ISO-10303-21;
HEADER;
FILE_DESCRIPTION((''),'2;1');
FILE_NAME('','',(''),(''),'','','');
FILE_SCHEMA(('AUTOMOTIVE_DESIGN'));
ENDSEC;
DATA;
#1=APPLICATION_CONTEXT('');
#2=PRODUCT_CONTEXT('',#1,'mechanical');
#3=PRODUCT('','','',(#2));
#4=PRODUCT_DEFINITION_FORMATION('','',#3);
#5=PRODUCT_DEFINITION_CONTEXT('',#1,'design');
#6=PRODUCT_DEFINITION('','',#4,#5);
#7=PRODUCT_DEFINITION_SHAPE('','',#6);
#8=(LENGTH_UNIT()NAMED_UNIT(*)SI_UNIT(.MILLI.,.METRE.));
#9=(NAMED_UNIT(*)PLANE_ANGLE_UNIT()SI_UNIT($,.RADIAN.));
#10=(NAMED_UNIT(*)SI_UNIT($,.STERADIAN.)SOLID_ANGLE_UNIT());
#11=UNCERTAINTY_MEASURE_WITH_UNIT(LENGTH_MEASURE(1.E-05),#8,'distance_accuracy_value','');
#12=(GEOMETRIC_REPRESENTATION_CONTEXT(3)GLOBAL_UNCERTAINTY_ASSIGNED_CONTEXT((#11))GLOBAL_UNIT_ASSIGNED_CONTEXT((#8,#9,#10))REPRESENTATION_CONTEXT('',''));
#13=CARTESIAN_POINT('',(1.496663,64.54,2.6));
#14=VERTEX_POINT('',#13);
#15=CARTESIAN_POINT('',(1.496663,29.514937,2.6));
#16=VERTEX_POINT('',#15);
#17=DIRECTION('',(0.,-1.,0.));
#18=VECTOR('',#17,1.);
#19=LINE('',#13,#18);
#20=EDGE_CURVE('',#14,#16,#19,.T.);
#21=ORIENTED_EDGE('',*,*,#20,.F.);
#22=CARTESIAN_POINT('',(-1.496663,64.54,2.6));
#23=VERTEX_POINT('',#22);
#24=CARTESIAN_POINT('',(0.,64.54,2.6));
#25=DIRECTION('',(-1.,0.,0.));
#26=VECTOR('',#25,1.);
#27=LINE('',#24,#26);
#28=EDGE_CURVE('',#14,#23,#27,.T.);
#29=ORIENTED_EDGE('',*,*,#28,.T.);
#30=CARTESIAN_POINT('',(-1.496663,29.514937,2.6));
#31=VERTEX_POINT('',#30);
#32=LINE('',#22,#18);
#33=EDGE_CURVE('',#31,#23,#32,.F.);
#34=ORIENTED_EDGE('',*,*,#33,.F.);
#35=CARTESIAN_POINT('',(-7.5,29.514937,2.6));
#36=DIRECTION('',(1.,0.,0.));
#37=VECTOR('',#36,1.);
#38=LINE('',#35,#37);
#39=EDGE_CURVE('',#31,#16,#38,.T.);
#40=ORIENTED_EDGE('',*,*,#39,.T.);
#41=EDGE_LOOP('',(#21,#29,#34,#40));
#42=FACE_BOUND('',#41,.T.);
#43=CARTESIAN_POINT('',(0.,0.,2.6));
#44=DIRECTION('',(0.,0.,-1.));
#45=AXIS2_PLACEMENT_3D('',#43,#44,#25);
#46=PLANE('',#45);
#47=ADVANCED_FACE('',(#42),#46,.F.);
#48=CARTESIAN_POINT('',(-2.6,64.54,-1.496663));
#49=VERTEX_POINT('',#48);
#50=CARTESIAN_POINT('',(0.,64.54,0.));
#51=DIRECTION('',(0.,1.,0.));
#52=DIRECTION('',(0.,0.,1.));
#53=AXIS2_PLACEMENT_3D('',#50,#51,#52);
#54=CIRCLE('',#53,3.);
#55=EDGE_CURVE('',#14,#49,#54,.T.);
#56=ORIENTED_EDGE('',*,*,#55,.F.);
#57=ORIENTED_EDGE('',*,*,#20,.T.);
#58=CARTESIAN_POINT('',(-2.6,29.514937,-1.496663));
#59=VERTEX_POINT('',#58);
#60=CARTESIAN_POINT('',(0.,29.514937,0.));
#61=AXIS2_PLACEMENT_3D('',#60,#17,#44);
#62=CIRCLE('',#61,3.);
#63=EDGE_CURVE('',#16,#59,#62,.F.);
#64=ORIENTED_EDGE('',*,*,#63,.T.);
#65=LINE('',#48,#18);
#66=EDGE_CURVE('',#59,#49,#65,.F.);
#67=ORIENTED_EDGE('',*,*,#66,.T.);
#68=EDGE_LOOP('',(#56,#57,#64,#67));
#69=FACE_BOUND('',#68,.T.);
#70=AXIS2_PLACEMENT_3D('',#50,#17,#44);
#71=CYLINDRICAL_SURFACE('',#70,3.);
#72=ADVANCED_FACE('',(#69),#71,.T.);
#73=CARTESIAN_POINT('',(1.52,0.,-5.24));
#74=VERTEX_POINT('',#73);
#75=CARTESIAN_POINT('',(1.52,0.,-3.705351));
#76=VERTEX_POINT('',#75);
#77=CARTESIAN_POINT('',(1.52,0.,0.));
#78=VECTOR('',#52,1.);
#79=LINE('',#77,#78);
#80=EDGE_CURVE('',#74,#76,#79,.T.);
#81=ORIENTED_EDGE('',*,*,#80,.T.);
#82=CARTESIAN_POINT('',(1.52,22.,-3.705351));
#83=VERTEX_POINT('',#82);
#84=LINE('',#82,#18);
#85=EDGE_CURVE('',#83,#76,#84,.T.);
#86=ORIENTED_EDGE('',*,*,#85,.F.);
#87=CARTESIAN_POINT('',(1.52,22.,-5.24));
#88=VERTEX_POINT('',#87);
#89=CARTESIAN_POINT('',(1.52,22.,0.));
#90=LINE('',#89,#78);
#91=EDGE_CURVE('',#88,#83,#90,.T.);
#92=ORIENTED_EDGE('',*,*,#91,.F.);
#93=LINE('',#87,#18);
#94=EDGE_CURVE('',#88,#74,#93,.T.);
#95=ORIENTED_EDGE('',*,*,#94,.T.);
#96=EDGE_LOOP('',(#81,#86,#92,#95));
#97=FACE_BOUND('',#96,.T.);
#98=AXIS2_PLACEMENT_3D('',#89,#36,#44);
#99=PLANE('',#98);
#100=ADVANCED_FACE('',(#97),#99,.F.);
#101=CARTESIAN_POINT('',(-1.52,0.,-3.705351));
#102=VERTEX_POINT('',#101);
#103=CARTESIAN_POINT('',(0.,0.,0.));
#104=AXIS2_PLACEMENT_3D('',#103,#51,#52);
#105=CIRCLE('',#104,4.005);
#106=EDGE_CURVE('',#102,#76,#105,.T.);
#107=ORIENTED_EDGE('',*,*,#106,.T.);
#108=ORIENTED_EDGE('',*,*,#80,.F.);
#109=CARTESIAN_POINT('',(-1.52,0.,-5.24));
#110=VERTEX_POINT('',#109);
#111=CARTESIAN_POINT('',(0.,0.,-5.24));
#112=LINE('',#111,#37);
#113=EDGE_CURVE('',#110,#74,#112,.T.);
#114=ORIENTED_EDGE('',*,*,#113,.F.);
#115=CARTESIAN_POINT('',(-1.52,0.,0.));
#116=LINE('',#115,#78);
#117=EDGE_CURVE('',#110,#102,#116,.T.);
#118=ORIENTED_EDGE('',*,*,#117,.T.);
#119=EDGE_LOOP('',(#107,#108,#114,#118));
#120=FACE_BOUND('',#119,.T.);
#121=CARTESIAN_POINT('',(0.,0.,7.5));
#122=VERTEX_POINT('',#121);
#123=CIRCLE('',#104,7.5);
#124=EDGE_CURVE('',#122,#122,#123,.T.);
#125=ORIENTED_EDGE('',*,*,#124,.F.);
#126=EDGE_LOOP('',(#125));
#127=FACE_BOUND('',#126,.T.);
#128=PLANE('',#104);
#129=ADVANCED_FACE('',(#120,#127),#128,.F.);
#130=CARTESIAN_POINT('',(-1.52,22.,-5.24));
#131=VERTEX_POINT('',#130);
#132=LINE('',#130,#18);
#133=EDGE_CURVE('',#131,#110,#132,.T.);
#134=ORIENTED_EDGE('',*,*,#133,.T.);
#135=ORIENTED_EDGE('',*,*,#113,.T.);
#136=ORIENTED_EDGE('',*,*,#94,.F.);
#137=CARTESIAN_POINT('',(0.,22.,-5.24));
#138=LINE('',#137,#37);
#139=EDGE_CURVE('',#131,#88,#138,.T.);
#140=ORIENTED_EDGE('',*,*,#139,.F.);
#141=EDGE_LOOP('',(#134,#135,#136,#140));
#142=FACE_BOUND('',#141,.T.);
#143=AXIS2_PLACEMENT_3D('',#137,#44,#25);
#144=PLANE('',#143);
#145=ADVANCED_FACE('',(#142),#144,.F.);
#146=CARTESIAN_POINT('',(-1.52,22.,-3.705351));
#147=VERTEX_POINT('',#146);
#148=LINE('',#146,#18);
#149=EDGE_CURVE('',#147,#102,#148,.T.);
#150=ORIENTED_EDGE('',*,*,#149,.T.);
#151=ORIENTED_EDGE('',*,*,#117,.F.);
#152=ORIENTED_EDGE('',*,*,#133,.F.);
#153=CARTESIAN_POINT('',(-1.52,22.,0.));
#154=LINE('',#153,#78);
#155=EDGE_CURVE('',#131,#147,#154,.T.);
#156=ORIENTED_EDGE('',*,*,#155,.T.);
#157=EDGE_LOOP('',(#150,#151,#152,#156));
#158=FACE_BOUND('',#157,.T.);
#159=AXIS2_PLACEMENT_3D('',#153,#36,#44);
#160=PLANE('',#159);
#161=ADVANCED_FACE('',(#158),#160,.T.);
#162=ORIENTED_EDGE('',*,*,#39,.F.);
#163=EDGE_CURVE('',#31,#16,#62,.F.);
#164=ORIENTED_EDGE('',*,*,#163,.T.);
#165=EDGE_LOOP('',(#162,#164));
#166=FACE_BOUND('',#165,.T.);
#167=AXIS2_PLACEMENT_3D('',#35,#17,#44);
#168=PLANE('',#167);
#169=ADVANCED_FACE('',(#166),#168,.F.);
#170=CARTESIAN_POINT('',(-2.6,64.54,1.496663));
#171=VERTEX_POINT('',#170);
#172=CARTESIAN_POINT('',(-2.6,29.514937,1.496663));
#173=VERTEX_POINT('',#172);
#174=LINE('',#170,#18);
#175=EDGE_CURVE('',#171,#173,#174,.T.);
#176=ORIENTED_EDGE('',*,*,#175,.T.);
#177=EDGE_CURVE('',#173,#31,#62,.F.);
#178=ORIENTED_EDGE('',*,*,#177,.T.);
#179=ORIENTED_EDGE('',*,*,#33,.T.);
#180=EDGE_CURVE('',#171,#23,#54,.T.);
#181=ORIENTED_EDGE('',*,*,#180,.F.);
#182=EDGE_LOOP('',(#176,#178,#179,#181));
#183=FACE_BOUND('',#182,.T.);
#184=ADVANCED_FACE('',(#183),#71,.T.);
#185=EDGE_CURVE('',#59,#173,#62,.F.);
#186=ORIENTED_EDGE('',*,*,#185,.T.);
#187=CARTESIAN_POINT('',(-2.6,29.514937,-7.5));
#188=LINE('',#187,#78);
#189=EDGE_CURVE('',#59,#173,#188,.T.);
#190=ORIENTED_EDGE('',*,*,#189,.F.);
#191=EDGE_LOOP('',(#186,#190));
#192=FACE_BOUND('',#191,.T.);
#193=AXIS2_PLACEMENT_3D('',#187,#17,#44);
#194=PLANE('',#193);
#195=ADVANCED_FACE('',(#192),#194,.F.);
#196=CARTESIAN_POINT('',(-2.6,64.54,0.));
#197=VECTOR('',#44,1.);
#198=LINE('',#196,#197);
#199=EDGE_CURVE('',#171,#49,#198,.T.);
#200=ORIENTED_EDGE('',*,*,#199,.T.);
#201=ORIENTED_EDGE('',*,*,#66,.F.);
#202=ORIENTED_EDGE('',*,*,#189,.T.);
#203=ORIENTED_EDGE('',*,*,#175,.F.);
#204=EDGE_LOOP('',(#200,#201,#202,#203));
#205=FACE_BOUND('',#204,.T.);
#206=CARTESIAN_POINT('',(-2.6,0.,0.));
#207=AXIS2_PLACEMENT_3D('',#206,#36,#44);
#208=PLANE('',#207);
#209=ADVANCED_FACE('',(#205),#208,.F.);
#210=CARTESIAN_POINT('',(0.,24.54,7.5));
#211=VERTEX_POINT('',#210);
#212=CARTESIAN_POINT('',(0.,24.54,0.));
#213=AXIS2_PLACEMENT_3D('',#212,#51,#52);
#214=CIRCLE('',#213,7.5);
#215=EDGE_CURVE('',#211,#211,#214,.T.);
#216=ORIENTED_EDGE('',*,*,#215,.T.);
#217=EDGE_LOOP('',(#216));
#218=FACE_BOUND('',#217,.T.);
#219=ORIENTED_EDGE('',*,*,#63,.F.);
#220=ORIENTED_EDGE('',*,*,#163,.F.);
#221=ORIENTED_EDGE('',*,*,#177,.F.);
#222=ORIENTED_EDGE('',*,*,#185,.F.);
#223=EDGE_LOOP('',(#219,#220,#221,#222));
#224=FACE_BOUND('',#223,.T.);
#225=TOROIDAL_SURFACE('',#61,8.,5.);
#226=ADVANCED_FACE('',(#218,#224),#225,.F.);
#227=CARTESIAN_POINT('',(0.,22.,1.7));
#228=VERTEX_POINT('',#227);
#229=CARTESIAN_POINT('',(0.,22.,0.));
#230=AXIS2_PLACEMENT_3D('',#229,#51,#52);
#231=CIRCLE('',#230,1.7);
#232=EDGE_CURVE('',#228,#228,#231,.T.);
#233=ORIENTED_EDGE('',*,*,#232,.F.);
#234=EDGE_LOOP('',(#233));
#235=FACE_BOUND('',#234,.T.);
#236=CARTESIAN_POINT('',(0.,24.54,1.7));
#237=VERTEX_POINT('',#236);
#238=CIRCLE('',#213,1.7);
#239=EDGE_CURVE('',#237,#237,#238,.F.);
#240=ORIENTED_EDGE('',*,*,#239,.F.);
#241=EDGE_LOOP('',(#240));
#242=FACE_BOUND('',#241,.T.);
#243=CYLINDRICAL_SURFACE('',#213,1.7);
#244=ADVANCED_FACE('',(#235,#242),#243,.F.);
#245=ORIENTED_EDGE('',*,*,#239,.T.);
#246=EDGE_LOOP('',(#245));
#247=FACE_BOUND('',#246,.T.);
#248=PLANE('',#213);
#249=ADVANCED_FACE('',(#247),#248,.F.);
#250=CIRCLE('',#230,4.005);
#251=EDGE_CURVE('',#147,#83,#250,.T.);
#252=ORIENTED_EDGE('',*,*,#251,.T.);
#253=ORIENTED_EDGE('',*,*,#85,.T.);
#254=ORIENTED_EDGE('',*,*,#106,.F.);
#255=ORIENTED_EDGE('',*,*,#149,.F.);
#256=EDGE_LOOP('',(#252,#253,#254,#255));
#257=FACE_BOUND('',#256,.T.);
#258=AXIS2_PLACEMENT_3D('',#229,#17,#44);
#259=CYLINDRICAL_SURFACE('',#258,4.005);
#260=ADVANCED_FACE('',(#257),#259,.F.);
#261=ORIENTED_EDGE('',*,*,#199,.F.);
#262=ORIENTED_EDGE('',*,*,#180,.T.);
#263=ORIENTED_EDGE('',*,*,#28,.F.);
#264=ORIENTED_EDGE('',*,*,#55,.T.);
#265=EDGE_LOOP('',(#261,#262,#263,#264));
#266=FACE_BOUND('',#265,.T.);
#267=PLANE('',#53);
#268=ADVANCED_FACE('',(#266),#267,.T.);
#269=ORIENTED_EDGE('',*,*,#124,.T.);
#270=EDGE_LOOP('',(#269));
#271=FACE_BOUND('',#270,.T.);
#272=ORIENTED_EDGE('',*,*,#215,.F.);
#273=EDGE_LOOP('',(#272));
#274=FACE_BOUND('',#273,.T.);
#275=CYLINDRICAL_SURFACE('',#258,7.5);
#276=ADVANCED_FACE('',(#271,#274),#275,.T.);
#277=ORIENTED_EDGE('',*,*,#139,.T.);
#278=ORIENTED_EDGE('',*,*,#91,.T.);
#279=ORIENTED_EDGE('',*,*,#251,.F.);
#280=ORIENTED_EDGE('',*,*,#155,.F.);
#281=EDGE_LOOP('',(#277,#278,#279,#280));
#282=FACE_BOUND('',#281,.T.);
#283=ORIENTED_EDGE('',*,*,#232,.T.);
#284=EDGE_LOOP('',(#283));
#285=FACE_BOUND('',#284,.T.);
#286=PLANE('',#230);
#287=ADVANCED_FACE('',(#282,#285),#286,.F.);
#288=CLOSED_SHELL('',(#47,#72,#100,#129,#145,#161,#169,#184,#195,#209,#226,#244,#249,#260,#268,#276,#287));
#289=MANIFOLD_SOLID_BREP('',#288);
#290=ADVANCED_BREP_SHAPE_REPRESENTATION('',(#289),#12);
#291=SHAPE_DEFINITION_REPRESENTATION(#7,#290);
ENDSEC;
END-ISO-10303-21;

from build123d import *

# Parameters (mm, degrees)
SKETCH1_R            = 7.5
BOSS_EXTRUDE1_DEPTH  = 22
SKETCH3_R            = 7.5
BOSS_EXTRUDE2_DEPTH  = 2.54
M3_CLEARANCE_HOLE1_D = 3.4
SKETCH4_R            = 3
BOSS_EXTRUDE4_DEPTH  = 40
FILLET1_R            = 5
SKETCH12_W           = 15.000000000000002
SKETCH12_H           = 35.32384224330768
CUT_EXTRUDE1_DEPTH   = 0.4
CIRPATTERN2_COUNT    = 2
CIRPATTERN2_ANGLE    = 90.0000000000002


with BuildPart() as part:
    # Sketch1 → Boss-Extrude1 (new body)
    with BuildSketch(Plane(origin=(0, 0, 0), x_dir=(1, 0, 0), z_dir=(0, 1, 0))):
        with Locations(Location((0, 0, 0), (0, 0, 270))):
            Circle(SKETCH1_R)
        with BuildLine():
            Line((-1.5199999999999996, 3.705350860579872), (-1.52, 5.24))
            Line((-1.52, 5.24), (1.52, 5.24))
            Line((1.52, 5.24), (1.5199999999999996, 3.705350860579872))
            ThreePointArc((1.5199999999999994, 3.7053508605798724), (3.3262309751428867, 2.2307425893634614), (4.005, 0))
            ThreePointArc((4.005, -9.8e-16), (-2.2307425893634596, -3.326230975142888), (-1.5199999999999998, 3.7053508605798724))
        make_face(mode=Mode.SUBTRACT)
    extrude(amount=BOSS_EXTRUDE1_DEPTH)

    # Sketch3 → Boss-Extrude2 (add)
    with BuildSketch(Plane(origin=(0, 22, 0), x_dir=(1, 0, 0), z_dir=(0, 1, 0))):
        with Locations(Location((0, 0, 0), (0, 0, 270))):
            Circle(SKETCH3_R)
    extrude(amount=BOSS_EXTRUDE2_DEPTH)

    # M3 Clearance Hole1 (through all)
    with Locations(Plane(origin=(0, 24.54, 0), x_dir=(1, 0, 0), z_dir=(0, 1, 0))):
        with Locations((0, 0)):
            Hole(M3_CLEARANCE_HOLE1_D / 2)

    # Sketch4 → Boss-Extrude4 (add)
    with BuildSketch(Plane(origin=(0, 24.54, 0), x_dir=(1, 0, 0), z_dir=(0, 1, 0))):
        with Locations(Location((0, 0, 0), (0, 0, 270))):
            Circle(SKETCH4_R)
    extrude(amount=BOSS_EXTRUDE4_DEPTH)

    # Fillet1
    # the kernel refuses this fillet: 5 mm, written as the material it adds along each edge
    with BuildSketch(Plane(origin=(0, 24.54, 0), x_dir=(-1.8e-16, 0, 1), z_dir=(-1, 0, -1.8e-16))) as fillet1_piece_1:
        with BuildLine():
            CenterArc((8, 4.974937185533101), FILLET1_R, 180, 84.26082952273322)
            Line((3, 4.974937185533101), (2.9, 4.974937185533101))
            Line((2.9, 4.974937185533101), (2.9, 0))
            Line((2.9, 0), (3, -0.10000000000000142))
            ThreePointArc((3, -0.10000000000000142), (5.25, -0.10000000000000142), (7.49, -0.09949874371066159))
            Line((7.49, -0.09949874371066159), (7.5, 0))
        make_face()
    revolve(axis=Axis((0, 24.54, 0), (0, 1, 0)))

    # Sketch12 → Cut-Extrude1 (cut)
    with BuildSketch(Plane.ZY.offset(3.0000000000000004)):
        with Locations((0, 47.17685830718694)):
            Rectangle(SKETCH12_W, SKETCH12_H)
    cut_extrude1 = extrude(amount=-CUT_EXTRUDE1_DEPTH, mode=Mode.SUBTRACT)

    # CirPattern2: Cut-Extrude1 ×2 about axis
    cirpattern2_axis = Axis((0, 64.54, 0), (0, 1, 0))
    for i in range(1, CIRPATTERN2_COUNT):
        add(cut_extrude1.rotate(cirpattern2_axis, i * CIRPATTERN2_ANGLE / (CIRPATTERN2_COUNT - 1)), mode=Mode.SUBTRACT)


solid = part.part
